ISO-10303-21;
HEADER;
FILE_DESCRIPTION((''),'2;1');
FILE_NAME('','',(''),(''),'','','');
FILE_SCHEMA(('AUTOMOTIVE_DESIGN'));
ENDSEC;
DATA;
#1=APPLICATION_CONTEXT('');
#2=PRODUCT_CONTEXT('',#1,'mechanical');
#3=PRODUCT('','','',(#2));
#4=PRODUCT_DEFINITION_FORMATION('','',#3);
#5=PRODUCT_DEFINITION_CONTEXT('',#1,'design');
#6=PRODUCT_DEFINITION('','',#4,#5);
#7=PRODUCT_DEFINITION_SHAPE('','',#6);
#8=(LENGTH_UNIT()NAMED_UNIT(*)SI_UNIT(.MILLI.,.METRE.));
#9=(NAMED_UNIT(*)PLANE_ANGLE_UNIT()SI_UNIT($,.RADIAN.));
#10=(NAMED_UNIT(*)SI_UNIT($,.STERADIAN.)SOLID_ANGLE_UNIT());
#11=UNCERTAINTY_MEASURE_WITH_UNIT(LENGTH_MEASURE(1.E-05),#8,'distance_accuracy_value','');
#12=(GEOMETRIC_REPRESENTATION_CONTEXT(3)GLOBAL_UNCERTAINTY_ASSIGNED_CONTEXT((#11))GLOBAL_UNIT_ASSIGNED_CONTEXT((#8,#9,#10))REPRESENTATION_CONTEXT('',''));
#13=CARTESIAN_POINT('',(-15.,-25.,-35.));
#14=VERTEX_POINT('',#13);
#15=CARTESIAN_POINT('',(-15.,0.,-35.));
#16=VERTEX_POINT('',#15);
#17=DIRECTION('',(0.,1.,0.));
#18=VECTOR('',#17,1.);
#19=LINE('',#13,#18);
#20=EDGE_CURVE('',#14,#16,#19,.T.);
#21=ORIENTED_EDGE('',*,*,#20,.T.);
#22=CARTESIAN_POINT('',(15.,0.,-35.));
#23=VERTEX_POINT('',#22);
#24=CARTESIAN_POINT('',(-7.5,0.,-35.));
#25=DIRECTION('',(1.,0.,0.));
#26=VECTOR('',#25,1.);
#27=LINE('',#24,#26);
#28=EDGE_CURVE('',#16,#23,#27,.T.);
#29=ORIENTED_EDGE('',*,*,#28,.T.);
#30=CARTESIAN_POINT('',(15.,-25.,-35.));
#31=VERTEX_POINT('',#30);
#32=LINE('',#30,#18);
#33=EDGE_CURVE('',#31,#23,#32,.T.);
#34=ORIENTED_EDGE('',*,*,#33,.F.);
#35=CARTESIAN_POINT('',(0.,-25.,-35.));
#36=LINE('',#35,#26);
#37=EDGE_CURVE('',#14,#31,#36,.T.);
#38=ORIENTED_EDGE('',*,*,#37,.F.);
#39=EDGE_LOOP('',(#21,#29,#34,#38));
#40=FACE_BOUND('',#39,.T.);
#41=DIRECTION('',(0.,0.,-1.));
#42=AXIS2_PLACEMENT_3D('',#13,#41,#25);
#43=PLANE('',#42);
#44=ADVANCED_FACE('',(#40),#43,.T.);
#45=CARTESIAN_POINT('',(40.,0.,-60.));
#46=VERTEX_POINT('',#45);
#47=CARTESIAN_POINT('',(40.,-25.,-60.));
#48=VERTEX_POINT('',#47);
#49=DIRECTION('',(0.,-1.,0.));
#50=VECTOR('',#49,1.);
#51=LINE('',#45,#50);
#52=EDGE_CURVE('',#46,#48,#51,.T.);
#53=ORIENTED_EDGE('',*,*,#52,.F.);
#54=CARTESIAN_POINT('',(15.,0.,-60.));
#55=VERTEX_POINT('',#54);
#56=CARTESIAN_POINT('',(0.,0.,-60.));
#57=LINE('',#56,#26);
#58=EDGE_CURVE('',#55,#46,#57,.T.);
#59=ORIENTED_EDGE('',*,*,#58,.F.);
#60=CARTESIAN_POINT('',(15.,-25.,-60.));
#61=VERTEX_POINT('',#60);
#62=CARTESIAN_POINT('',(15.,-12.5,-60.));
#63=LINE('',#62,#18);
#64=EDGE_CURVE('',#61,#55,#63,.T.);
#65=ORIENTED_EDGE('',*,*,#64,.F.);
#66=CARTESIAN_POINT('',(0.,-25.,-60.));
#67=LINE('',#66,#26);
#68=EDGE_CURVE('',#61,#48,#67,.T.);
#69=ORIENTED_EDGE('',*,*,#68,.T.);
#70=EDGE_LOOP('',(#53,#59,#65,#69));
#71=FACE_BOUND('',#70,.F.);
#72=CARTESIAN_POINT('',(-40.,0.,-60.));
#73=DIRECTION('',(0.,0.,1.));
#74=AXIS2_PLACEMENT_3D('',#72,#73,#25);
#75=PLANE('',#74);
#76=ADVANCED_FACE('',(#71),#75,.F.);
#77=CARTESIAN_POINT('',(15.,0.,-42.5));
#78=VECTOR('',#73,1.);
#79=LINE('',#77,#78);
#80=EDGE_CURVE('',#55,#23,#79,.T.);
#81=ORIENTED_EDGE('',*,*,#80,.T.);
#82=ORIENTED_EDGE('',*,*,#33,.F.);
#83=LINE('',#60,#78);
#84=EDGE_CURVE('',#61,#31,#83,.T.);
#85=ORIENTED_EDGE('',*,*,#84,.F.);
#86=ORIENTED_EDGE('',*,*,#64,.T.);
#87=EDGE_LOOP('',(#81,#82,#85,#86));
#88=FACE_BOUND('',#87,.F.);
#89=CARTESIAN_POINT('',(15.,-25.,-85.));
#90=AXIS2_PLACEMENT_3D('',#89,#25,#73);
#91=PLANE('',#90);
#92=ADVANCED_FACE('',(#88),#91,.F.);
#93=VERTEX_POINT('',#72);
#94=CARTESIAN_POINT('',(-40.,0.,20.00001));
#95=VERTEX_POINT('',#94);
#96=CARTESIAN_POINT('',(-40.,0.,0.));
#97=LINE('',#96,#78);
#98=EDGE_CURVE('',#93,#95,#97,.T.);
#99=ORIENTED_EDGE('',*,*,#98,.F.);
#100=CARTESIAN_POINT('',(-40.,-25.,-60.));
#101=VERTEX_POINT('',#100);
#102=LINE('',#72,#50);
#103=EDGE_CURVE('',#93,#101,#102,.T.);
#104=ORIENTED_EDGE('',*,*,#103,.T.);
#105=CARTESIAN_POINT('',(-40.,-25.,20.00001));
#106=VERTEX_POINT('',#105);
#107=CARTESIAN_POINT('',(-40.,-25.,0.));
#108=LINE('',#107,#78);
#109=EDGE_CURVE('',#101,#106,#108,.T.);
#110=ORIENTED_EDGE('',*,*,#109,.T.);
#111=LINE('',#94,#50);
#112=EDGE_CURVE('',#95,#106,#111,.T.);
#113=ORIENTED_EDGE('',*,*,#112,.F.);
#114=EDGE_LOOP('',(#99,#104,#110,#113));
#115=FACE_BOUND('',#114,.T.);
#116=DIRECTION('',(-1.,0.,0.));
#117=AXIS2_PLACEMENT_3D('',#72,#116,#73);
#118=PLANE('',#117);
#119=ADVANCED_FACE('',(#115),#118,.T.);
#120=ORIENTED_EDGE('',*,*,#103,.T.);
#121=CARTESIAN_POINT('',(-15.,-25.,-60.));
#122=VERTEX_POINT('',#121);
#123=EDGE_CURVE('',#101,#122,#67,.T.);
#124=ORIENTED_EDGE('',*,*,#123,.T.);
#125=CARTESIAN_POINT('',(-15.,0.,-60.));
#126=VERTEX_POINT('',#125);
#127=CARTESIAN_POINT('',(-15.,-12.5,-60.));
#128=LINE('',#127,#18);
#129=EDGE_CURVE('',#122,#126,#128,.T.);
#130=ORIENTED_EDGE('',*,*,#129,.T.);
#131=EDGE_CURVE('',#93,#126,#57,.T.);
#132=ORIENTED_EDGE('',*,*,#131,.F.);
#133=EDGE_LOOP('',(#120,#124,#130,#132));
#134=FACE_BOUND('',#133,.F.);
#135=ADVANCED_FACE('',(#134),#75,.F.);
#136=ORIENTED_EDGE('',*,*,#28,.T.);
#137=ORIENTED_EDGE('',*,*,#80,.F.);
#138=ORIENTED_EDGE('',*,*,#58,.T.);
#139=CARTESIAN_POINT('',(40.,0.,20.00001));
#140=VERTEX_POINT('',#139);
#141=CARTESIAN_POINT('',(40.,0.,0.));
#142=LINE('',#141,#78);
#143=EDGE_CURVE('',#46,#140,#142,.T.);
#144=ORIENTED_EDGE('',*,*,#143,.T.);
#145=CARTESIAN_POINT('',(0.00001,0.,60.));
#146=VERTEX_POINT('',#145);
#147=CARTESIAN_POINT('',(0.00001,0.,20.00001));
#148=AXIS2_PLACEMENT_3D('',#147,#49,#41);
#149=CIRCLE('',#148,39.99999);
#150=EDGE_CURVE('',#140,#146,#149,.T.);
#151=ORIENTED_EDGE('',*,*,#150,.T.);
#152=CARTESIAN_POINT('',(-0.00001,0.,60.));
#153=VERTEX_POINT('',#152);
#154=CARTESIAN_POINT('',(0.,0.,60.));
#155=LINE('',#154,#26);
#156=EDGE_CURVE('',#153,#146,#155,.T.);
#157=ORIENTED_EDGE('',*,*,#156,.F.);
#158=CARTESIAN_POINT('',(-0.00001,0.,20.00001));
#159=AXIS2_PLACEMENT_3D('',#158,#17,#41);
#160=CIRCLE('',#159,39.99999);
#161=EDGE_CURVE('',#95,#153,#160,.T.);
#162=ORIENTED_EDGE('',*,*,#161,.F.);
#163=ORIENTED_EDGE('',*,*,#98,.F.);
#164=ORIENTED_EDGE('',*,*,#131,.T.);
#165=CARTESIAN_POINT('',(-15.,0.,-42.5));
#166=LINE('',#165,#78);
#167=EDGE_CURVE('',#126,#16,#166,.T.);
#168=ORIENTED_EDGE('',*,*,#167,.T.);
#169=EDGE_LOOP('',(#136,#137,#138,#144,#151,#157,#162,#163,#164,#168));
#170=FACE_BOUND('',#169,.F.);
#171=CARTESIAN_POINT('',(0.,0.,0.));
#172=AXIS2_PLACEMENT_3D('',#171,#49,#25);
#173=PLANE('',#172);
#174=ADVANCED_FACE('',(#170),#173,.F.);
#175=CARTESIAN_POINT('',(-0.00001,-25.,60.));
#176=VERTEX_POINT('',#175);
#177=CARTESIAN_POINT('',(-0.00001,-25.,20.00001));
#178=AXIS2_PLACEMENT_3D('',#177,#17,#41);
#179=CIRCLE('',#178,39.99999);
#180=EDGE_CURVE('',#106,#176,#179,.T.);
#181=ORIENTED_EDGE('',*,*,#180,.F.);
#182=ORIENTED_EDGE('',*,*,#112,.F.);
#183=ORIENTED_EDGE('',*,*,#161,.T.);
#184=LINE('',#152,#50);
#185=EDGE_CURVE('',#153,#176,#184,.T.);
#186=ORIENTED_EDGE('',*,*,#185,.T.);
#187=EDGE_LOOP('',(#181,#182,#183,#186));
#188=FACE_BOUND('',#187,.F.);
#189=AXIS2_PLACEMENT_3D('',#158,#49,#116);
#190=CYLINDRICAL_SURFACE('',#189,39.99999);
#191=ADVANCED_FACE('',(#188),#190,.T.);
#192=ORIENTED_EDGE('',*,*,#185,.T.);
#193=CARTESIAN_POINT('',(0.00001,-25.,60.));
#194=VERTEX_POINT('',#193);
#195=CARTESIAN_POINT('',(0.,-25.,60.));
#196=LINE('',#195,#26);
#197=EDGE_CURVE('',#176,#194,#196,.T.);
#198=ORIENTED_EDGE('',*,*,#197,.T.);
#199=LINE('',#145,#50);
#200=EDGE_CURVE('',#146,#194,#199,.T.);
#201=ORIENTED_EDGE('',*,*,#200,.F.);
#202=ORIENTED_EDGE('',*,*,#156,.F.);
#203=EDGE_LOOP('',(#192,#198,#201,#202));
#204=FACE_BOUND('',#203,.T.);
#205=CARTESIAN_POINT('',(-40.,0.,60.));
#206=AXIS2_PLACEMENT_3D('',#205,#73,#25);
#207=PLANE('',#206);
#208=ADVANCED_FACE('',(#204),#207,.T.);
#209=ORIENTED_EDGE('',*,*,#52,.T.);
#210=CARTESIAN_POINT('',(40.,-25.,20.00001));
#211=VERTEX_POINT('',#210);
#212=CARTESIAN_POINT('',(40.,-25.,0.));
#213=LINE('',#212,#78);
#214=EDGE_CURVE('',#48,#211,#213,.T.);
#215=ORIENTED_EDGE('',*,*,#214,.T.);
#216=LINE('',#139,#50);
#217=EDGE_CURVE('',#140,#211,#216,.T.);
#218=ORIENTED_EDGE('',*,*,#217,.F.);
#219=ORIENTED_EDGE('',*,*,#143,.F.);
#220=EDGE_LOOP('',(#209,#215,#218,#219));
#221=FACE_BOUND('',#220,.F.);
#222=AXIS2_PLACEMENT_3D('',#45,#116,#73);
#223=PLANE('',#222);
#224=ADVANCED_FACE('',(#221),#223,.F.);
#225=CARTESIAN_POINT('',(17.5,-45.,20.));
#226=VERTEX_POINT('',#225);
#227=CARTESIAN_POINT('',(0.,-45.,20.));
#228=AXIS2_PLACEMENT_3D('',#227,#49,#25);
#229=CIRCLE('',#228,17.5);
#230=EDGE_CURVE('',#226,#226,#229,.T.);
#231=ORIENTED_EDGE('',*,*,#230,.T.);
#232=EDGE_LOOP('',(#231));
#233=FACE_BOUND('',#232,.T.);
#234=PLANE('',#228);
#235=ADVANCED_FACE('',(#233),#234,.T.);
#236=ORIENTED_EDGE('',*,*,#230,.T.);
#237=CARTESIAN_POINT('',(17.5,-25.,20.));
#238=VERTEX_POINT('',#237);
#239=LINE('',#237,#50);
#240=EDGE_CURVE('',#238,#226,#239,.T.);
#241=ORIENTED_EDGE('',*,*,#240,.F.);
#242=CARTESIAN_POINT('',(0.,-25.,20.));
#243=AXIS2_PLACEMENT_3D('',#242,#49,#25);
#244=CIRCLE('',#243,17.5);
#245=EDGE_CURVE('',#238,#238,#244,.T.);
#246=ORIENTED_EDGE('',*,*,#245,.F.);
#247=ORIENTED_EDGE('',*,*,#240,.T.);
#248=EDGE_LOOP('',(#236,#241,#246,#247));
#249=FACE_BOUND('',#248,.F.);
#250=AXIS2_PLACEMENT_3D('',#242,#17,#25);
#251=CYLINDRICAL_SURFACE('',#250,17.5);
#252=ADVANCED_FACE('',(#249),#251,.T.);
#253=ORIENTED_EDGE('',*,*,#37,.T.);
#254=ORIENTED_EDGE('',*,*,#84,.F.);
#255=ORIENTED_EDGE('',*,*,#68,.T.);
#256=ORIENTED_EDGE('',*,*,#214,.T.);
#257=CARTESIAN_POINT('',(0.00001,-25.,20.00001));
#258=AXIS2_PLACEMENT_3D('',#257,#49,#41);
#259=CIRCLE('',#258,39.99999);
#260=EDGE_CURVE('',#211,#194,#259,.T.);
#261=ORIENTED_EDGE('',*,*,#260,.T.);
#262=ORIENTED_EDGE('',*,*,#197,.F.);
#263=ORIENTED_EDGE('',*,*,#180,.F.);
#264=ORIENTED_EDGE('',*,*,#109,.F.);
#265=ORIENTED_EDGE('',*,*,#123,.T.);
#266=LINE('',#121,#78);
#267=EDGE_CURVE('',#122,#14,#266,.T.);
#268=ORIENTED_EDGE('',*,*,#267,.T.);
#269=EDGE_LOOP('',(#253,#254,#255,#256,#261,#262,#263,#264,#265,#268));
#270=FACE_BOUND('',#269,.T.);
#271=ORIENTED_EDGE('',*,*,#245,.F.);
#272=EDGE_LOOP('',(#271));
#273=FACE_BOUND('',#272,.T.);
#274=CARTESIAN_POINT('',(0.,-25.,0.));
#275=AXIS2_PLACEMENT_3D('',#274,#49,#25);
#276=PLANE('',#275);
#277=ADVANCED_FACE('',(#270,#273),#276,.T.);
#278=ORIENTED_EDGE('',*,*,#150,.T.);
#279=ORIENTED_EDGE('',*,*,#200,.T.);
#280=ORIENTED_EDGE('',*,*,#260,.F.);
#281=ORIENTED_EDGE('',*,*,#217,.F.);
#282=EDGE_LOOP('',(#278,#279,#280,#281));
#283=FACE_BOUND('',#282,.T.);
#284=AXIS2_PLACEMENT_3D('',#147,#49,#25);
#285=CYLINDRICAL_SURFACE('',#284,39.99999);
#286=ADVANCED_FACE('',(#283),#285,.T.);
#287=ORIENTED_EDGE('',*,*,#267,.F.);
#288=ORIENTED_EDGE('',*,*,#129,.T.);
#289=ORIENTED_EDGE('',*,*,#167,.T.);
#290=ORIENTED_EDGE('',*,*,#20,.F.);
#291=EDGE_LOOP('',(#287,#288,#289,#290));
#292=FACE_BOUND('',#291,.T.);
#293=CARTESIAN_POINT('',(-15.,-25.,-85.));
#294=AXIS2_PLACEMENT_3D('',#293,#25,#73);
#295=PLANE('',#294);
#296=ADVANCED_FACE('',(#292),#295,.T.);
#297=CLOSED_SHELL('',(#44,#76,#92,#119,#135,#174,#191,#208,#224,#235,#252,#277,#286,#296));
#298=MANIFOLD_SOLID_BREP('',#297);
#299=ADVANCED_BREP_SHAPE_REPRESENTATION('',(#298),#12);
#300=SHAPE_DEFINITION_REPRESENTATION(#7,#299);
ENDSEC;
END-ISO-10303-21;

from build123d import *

# Parameters (mm, degrees)
F0_W     = 80
F0_H     = 120
F1_DEPTH = 25
F2_R     = 39.99999
F3_W     = 30
F3_H     = 50
F4_DEPTH = 25.001
F5_R     = 17.5
F6_DEPTH = 20


# Not quite as in the source:
# - a fillet or chamfer is up to 0.001 mm smaller than in the source, because OpenCascade refuses the exact size


with BuildPart() as f1:
    # F0 (on Front) → F1 (new body)
    with BuildSketch(Plane.XZ):
        Rectangle(F0_W, F0_H)
    extrude(amount=F1_DEPTH)

    # F2 (radius 40 in the source; OpenCascade refuses exactly that, so slightly less here)
    f2_edges = [f1.edges().sort_by_distance(p)[0] for p in [
        (40, -12.5, 60),
        (-40, -12.5, 60),
    ]]
    fillet(f2_edges, radius=F2_R)

    # F3 (on face) → F4 (cut, through all)
    with BuildSketch(Plane.XZ.offset(25)):
        with Locations((0, -60)):
            Rectangle(F3_W, F3_H)
    extrude(amount=-F4_DEPTH, mode=Mode.SUBTRACT)

    # F5 (on face) → F6 (join)
    with BuildSketch(Plane.XZ.offset(25)):
        with Locations((0, 20)):
            Circle(F5_R)
    extrude(amount=F6_DEPTH)


solid = f1.part
